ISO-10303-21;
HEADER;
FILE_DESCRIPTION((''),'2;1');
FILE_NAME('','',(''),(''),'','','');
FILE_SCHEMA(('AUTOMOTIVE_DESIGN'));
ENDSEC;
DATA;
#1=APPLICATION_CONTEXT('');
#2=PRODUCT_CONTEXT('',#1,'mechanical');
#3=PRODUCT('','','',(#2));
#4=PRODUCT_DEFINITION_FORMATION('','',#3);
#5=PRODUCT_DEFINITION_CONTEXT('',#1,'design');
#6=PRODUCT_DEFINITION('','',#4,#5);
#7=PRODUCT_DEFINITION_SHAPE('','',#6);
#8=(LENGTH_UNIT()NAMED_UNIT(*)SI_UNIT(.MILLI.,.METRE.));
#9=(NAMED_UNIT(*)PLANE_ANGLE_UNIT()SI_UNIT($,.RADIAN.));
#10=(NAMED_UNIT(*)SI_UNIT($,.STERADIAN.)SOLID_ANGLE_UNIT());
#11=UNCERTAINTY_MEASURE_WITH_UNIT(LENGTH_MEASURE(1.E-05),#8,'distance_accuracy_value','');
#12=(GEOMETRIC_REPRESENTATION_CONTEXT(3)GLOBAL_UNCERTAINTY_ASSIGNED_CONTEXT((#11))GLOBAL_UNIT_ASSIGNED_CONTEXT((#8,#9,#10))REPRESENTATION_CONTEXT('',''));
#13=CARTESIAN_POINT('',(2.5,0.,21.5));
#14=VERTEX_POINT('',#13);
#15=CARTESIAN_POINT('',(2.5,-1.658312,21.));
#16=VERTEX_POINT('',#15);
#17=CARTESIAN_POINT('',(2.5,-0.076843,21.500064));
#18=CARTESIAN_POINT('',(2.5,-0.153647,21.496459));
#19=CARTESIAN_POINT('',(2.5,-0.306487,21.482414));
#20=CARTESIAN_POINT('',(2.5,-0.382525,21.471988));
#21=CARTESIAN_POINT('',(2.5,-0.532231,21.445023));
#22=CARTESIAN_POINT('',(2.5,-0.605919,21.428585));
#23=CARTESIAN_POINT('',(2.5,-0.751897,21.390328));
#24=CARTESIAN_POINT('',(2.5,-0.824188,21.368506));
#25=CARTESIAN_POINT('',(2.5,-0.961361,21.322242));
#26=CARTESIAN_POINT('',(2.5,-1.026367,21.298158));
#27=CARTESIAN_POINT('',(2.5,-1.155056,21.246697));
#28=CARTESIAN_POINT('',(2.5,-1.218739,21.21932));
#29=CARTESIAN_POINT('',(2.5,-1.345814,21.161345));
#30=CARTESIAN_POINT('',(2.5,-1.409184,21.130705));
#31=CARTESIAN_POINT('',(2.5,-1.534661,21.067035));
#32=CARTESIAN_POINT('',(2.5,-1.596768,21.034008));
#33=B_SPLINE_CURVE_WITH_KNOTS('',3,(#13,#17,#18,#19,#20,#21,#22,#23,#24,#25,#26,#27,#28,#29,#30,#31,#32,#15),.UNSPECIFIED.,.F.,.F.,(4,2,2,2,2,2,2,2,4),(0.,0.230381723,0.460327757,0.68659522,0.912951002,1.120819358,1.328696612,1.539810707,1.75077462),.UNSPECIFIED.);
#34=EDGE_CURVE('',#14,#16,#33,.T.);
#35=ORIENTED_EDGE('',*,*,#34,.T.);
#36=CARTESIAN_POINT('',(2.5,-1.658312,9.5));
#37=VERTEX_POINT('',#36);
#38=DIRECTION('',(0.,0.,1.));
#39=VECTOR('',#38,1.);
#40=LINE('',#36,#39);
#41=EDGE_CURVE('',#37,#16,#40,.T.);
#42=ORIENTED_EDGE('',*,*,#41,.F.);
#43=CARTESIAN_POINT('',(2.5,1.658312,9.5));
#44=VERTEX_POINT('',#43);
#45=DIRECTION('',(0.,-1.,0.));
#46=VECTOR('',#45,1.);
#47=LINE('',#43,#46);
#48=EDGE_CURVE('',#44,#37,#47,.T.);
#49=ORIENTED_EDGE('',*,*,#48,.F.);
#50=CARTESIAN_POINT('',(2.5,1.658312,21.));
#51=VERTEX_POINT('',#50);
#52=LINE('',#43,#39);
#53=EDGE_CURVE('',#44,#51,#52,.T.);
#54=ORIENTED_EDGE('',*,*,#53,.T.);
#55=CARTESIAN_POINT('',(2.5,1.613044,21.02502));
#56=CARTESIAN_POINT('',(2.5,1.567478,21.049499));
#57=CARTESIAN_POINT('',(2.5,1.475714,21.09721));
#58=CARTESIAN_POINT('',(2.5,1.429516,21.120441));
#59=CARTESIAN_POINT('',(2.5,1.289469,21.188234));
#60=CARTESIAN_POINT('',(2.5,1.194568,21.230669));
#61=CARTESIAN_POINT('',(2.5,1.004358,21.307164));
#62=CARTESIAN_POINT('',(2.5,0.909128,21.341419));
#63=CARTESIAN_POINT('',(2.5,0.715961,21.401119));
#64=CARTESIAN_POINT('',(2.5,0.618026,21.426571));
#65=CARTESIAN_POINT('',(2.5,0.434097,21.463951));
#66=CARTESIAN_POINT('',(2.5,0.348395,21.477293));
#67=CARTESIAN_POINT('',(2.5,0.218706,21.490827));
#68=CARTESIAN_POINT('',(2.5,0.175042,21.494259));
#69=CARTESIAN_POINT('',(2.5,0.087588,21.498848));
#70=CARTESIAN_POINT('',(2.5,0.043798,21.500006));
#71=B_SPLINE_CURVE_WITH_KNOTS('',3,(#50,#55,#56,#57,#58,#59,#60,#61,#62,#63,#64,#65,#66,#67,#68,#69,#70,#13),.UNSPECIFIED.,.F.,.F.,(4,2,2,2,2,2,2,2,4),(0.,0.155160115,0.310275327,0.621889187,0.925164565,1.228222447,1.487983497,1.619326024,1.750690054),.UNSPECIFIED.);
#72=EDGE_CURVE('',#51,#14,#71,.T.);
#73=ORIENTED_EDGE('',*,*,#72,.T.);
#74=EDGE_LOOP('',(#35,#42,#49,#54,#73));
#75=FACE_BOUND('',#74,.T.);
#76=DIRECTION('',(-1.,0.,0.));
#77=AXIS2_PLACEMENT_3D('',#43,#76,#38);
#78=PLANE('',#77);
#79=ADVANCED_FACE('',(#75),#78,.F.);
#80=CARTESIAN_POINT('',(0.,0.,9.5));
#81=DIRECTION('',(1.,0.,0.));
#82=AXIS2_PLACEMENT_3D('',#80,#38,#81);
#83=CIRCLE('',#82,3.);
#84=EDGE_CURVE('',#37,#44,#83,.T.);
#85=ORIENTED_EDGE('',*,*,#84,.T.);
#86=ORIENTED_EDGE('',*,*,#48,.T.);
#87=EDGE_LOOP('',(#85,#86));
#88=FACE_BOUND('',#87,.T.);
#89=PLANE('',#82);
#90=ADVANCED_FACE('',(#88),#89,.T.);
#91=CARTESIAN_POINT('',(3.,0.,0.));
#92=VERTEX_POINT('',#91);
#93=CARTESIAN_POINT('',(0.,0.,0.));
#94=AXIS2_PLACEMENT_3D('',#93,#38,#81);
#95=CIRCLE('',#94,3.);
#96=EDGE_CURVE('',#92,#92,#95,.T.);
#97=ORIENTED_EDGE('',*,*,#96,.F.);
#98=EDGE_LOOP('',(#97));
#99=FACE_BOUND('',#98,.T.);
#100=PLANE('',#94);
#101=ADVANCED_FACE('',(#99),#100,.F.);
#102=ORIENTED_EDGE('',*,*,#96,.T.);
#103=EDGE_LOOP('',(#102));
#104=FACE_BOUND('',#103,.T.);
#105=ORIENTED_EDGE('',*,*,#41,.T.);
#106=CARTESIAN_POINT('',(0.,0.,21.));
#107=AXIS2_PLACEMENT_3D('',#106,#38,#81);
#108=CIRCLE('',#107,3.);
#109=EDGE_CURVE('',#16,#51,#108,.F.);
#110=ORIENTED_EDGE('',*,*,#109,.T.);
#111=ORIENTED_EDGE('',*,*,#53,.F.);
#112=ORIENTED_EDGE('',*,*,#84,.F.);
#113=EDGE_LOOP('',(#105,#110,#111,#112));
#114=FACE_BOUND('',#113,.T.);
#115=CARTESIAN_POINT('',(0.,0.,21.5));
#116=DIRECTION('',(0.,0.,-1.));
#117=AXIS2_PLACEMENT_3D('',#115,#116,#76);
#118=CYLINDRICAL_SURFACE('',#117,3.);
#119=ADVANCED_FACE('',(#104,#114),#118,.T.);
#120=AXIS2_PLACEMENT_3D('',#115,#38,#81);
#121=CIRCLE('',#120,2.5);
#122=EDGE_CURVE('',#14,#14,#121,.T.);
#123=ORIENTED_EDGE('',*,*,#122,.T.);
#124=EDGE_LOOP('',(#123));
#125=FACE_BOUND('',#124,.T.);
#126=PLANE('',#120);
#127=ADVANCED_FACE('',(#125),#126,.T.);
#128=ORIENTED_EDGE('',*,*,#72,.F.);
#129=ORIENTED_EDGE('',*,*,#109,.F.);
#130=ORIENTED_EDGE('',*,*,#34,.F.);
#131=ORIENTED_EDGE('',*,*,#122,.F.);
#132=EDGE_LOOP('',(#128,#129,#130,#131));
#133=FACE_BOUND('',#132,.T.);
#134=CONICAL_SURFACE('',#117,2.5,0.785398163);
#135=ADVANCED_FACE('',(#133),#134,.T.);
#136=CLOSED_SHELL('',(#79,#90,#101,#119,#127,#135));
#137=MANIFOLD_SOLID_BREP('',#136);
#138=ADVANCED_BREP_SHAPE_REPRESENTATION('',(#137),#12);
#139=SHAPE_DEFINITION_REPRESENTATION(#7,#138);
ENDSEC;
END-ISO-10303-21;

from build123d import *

# Parameters (mm, degrees)
SKETCH1_R           = 3
BOSS_EXTRUDE1_DEPTH = 21.5
CUT_EXTRUDE1_START  = -12
CUT_EXTRUDE1_DEPTH  = 12
CHAMFER1_SIZE       = 0.5


with BuildPart() as part:
    # Sketch1 → Boss-Extrude1 (new body)
    with BuildSketch(Plane.XY):
        Circle(SKETCH1_R)
    extrude(amount=BOSS_EXTRUDE1_DEPTH)

    # Sketch2 → Cut-Extrude1 (cut)
    with BuildSketch(Plane.XY.offset(21.5).offset(CUT_EXTRUDE1_START)):
        with BuildLine():
            Line((2.5, 1.658312395), (2.5, -1.658312395))
            ThreePointArc((2.5, -1.658312395), (3, 0), (2.5, 1.658312395))
        make_face()
    extrude(amount=CUT_EXTRUDE1_DEPTH, mode=Mode.SUBTRACT)

    # Chamfer1
    chamfer1_edges = [part.edges().sort_by_distance(p)[0] for p in [
        (-3, 0, 21.5),
    ]]
    chamfer(chamfer1_edges, length=CHAMFER1_SIZE - 0.0001)  # a hair under: the kernel refuses the full size


solid = part.part
